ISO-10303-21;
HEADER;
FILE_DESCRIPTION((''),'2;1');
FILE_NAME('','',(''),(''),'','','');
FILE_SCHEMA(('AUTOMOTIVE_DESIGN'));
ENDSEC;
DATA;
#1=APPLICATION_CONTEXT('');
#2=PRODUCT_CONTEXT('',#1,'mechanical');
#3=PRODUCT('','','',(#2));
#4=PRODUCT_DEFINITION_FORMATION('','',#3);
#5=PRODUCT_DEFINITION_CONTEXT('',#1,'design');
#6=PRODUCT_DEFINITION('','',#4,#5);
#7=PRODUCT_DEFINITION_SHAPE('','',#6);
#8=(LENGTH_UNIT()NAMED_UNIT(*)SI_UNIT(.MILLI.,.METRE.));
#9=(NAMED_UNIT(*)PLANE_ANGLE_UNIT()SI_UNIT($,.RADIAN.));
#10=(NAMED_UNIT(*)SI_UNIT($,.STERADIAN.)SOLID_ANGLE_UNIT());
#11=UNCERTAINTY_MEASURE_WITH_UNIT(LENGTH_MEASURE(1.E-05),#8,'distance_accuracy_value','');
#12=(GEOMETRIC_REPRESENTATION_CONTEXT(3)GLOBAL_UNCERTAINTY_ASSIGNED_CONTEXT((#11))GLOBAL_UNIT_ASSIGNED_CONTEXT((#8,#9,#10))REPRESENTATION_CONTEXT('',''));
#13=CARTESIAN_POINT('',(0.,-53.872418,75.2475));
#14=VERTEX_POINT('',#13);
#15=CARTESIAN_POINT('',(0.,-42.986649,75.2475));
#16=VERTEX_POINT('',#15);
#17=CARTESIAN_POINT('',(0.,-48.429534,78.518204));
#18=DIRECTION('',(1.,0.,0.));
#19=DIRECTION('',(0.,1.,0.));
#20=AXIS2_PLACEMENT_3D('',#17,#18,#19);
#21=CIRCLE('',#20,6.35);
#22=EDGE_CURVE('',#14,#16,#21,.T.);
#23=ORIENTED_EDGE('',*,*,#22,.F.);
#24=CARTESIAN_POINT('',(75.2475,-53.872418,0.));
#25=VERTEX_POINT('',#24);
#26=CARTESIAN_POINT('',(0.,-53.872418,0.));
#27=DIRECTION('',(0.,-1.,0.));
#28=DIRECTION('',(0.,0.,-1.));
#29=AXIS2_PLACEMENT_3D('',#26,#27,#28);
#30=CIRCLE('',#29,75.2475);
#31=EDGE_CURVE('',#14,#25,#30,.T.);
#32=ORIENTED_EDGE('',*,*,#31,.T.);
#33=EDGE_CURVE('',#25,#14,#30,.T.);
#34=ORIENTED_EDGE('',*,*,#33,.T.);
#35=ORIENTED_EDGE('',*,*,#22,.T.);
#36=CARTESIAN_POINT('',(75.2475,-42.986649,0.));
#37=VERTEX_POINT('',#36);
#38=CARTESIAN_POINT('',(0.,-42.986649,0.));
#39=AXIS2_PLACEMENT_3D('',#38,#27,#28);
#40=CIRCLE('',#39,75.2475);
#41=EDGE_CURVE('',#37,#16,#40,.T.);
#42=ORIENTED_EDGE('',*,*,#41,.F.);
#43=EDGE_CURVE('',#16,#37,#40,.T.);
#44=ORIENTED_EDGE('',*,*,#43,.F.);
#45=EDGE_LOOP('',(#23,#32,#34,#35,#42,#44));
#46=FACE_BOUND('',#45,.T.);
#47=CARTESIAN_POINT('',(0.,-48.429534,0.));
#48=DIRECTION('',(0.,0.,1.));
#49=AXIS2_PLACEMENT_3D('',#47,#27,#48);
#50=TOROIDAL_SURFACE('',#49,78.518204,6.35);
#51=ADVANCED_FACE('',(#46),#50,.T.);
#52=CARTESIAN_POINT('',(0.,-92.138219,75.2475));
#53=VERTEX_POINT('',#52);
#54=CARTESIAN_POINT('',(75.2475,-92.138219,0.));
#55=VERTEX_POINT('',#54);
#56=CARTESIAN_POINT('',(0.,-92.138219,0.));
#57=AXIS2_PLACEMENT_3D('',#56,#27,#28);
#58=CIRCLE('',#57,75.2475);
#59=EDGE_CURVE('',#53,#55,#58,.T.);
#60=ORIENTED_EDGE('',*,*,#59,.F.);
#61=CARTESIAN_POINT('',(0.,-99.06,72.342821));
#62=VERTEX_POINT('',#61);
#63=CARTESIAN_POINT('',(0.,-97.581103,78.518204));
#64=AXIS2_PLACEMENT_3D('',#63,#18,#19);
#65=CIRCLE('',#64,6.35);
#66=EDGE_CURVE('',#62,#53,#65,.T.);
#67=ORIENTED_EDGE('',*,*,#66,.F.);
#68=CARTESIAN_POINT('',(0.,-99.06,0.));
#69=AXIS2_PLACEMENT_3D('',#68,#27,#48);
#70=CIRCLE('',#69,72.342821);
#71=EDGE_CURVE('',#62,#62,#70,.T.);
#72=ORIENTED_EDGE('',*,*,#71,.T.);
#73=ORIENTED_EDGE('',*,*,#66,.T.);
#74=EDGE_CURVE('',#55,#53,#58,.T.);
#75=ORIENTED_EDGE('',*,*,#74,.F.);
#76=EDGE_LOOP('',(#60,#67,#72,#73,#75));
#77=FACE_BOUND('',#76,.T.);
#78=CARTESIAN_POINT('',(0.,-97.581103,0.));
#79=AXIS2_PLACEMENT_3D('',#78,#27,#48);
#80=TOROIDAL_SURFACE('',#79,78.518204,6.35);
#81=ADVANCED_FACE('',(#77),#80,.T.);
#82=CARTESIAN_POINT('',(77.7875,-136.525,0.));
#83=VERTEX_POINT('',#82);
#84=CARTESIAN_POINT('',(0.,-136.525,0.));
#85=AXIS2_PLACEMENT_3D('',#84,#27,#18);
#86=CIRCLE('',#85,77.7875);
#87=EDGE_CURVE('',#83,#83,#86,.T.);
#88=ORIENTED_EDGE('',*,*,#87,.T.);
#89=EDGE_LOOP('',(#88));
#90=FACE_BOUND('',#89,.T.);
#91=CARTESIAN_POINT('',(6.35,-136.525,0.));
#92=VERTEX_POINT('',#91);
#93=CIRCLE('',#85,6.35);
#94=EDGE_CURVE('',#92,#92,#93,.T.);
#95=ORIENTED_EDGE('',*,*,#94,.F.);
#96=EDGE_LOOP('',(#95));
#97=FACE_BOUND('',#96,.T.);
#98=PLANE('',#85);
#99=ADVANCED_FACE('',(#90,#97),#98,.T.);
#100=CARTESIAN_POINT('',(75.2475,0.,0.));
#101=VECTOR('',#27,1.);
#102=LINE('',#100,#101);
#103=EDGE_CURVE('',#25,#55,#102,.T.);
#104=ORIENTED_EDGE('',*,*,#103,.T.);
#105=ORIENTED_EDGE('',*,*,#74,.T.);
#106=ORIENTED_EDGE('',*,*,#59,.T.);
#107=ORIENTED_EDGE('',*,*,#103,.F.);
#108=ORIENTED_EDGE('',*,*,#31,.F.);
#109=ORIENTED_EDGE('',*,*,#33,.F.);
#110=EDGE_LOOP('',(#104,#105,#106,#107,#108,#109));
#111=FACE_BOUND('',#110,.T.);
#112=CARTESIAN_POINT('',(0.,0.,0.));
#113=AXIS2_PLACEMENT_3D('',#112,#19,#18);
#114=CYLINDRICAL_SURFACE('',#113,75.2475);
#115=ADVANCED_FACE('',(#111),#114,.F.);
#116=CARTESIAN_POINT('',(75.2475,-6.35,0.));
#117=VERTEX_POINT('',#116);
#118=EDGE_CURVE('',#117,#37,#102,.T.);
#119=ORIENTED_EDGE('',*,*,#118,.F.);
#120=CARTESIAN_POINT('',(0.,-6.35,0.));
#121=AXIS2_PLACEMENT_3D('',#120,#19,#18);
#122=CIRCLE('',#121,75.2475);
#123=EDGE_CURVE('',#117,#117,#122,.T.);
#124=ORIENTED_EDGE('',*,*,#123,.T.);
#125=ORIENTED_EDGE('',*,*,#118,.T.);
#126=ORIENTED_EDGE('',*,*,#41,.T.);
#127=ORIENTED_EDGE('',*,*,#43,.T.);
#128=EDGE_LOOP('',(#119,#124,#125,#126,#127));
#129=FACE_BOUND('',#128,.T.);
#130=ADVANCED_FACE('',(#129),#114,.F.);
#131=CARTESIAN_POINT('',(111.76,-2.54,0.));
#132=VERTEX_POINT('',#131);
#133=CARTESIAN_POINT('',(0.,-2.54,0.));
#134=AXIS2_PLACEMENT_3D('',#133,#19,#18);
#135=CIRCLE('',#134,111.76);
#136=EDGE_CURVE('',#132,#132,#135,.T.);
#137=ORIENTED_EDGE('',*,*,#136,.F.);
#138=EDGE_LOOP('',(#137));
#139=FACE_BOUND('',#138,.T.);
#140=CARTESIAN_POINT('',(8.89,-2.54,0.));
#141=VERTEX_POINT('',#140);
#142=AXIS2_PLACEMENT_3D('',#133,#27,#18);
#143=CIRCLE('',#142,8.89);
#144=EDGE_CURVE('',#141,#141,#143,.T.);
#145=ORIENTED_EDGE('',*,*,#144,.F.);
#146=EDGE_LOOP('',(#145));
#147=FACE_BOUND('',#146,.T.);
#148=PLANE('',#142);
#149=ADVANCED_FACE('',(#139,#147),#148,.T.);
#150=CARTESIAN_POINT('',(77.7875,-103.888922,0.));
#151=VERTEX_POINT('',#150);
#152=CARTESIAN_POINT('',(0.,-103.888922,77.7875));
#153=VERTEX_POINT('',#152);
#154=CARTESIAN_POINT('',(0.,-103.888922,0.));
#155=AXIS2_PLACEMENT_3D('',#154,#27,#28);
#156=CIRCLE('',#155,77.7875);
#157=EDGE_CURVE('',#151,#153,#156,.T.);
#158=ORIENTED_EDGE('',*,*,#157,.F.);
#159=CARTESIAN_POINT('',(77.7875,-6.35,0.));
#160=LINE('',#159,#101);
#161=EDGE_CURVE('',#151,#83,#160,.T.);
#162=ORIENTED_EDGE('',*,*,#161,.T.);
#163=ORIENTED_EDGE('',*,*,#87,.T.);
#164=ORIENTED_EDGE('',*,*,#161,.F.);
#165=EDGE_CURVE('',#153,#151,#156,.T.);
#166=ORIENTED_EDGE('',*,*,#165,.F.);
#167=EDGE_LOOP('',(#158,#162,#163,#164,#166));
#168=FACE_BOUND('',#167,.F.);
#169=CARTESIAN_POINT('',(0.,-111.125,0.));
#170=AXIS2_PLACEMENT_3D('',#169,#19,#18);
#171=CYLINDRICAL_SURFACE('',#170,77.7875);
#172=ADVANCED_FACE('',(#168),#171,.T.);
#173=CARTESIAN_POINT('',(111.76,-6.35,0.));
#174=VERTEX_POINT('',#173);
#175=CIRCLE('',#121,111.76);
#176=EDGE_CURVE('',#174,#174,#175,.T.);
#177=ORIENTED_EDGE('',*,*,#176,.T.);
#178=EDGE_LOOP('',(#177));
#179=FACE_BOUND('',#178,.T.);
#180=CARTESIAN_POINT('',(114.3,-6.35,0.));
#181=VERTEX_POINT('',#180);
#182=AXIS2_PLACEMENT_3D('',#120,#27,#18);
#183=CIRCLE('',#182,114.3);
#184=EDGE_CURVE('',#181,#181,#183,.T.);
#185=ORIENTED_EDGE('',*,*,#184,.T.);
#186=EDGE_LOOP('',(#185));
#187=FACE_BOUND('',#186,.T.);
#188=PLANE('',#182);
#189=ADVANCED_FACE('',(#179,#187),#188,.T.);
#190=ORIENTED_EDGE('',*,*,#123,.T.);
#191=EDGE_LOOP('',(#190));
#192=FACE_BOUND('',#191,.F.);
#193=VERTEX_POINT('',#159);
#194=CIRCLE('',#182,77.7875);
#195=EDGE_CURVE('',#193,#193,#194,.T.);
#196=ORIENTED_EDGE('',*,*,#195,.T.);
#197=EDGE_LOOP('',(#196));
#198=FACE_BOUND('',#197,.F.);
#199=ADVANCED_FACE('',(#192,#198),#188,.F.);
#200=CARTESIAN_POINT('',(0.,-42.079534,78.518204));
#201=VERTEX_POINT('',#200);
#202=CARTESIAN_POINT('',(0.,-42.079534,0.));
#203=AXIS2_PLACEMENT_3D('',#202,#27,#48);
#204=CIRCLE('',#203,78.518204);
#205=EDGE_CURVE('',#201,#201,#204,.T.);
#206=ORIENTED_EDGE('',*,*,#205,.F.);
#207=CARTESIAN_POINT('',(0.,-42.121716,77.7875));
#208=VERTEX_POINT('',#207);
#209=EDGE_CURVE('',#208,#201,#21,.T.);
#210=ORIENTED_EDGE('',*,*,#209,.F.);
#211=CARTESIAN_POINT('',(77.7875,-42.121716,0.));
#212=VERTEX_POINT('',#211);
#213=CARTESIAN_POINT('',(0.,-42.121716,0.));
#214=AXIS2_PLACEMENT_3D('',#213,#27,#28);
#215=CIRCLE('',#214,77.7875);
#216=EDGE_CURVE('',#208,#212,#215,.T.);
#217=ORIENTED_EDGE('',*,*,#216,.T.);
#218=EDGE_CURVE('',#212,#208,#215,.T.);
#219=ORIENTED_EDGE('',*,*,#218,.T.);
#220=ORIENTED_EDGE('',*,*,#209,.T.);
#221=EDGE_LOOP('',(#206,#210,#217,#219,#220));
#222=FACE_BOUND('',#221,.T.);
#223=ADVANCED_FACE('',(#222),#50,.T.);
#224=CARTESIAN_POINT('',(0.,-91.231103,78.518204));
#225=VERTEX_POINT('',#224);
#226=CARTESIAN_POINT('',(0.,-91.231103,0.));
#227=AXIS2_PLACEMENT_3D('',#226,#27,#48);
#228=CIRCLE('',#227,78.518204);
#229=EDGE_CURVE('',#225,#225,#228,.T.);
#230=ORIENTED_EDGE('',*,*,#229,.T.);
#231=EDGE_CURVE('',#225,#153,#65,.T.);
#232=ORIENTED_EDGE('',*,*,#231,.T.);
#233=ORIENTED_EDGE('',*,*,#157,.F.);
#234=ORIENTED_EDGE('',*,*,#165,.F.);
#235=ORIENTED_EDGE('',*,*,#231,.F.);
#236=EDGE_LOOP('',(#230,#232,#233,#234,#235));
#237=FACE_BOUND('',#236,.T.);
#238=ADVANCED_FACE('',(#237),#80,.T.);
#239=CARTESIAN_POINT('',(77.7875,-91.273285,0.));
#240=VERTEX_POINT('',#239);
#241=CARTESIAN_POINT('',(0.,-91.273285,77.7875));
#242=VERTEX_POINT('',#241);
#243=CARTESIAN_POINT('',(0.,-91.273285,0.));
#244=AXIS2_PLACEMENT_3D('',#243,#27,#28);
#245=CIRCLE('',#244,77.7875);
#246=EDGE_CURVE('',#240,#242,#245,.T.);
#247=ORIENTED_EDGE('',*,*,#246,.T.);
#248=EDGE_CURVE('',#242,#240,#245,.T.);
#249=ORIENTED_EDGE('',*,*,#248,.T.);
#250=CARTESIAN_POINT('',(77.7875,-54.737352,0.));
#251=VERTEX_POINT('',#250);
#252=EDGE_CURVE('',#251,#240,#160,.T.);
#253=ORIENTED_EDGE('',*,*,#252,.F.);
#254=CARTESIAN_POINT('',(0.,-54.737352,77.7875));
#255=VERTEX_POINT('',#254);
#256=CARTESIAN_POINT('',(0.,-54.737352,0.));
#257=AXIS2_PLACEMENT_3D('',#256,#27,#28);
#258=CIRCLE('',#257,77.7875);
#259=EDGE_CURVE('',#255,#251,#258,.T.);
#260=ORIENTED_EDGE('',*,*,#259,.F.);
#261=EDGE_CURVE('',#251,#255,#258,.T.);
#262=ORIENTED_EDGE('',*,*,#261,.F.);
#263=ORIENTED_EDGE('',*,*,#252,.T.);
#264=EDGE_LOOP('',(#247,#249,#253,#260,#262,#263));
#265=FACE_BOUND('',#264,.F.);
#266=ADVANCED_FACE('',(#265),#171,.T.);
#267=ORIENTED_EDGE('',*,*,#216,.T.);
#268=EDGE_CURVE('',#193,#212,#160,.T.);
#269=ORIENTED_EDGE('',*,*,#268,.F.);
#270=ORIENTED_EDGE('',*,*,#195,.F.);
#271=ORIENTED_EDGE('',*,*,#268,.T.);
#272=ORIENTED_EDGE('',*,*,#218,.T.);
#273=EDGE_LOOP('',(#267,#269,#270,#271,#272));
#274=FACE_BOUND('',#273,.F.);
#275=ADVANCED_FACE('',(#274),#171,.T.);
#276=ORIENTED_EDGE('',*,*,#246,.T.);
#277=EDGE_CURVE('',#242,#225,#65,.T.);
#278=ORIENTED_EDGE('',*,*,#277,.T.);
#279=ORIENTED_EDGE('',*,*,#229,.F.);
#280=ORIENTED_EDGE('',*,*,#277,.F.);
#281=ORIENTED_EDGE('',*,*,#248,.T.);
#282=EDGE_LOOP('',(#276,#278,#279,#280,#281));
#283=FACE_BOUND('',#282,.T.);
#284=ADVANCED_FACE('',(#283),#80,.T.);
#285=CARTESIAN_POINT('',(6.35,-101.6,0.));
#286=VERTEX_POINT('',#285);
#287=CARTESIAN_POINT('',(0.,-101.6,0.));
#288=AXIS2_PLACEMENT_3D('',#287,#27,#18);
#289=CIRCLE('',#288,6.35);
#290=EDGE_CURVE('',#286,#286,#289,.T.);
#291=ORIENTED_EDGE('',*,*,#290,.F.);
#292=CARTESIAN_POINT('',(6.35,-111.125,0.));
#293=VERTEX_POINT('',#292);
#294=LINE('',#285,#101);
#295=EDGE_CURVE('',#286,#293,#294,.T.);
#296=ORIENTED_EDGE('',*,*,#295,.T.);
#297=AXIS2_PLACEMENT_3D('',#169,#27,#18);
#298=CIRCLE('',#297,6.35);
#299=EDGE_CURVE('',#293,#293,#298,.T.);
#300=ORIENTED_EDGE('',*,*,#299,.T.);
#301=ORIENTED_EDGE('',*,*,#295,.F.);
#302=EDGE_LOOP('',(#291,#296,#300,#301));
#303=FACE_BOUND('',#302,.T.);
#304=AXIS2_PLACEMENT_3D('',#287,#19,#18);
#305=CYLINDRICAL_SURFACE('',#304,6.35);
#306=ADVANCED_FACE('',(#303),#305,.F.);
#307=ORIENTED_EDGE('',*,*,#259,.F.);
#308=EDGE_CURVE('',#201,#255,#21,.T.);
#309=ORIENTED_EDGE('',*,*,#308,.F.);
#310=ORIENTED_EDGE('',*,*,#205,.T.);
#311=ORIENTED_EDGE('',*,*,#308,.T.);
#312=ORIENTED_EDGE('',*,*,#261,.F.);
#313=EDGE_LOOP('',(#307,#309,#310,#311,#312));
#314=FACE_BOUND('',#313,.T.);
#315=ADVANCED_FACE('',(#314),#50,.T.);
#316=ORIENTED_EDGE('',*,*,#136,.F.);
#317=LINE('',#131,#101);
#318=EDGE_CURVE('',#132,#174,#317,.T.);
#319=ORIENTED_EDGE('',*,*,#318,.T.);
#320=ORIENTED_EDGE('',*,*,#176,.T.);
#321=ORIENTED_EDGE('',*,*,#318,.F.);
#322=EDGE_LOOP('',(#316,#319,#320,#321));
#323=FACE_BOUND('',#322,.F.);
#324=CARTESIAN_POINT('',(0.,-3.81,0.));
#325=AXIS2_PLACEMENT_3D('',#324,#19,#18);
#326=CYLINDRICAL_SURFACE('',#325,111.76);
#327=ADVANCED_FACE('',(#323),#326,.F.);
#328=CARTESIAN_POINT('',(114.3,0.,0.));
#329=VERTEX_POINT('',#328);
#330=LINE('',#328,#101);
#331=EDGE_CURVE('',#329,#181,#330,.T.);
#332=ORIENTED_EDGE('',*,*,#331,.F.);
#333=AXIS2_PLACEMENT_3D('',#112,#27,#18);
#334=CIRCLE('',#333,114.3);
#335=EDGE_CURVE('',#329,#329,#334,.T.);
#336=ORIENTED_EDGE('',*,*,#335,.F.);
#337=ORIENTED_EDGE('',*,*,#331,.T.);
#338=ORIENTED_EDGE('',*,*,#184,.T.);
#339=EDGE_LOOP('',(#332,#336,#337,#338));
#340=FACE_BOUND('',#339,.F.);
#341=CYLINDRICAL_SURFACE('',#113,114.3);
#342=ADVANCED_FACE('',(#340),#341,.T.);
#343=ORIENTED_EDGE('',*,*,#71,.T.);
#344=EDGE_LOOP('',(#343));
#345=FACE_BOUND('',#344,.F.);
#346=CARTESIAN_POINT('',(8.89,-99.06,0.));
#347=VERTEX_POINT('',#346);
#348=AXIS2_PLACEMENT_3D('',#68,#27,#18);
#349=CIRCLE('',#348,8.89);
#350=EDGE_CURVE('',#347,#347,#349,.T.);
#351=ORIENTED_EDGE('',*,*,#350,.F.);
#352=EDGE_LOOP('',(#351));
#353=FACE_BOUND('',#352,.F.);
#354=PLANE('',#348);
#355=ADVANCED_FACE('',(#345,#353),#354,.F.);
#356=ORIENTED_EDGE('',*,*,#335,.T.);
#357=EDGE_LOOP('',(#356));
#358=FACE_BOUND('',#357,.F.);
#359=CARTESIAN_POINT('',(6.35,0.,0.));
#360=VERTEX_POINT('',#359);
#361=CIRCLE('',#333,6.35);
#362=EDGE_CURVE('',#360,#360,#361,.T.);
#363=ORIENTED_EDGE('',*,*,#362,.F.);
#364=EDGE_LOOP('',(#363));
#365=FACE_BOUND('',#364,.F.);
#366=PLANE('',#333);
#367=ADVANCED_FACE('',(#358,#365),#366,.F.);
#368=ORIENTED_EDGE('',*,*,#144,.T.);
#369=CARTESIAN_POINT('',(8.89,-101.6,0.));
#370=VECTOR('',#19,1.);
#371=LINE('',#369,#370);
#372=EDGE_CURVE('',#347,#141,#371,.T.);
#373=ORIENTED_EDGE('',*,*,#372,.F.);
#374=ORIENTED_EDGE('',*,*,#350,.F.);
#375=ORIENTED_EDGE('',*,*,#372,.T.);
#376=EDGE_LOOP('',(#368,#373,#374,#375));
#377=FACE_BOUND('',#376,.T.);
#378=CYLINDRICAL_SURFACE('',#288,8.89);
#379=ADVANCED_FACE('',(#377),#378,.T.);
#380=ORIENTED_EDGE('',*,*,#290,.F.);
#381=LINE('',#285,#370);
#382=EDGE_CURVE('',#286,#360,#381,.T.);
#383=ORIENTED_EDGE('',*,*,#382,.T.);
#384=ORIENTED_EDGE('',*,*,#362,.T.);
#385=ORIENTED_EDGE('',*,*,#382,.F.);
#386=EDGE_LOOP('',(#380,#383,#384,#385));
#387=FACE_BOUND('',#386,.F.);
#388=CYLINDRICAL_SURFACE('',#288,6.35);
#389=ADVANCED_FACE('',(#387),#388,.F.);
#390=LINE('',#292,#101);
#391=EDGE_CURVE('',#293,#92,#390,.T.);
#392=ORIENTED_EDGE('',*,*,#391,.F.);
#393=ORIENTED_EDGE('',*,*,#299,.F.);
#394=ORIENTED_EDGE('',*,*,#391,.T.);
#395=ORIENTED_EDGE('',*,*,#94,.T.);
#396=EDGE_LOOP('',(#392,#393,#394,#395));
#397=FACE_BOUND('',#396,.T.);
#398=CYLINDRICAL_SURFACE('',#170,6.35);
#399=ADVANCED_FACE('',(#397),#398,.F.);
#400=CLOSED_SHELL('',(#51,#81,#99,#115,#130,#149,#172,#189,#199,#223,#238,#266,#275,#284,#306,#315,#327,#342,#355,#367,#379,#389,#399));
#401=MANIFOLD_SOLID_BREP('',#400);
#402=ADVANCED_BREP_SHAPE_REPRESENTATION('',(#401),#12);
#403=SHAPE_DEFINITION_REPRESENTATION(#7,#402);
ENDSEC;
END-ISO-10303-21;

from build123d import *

# Parameters (mm, degrees)
F0_R     = 114.3
F0_R_2   = 77.7875
F1_DEPTH = 6.35
F2_DEPTH = 203.2
F3_DEPTH = 101.6
F4_R     = 6.35
F5_DEPTH = 101.601
F6_T     = -2.54
F7_DEPTH = 9.525
F8_DEPTH = 25.4
F9_R     = 6.35


# Not quite as in the source:
# - a shell that OpenCascade refuses in one call is made with other operations: the cavity is built on its own and cut out


with BuildPart() as f1:
    # F0 (on Front) → F1 (new body)
    with BuildSketch(Plane.XZ):
        Circle(F0_R)
        Circle(F0_R_2, mode=Mode.SUBTRACT)
    extrude(amount=F1_DEPTH)

    # F0 (on Front) → F2 (join)
    with BuildSketch(Plane.XZ):
        Circle(F0_R_2)
    extrude(amount=F2_DEPTH)

    # F3 (cut): a face of the model
    f3_faces = [f1.faces().sort_by_distance(p)[0] for p in [
        (0, -203.2, 0),
    ]]
    extrude(f3_faces, amount=-F3_DEPTH, mode=Mode.SUBTRACT)

    # F4 (on face) → F5 (cut, through all)
    with BuildSketch(Plane.XZ.offset(101.6)):
        Circle(F4_R)
    extrude(amount=-F5_DEPTH, mode=Mode.SUBTRACT)

    # F6: a shell. OpenCascade refuses it in one call, so the cavity is built on its own and cut out:
    # the body offset inwards by the wall thickness, plus a prism from it out through each open face.
    f6_core = offset(f1.part, amount=F6_T, kind=Kind.INTERSECTION, mode=Mode.PRIVATE)
    f6_exits = [f6_core.faces().sort_by_distance(p)[0] for p in [
        (-78.40855, -3.81, 0),
    ]]
    add(f6_core, mode=Mode.SUBTRACT)
    extrude(f6_exits, amount=-F6_T, mode=Mode.SUBTRACT)

    # F7 (add): a face of the model
    f7_faces = [f1.faces().sort_by_distance(p)[0] for p in [
        (-75.5873372503, -101.6, 0),
    ]]
    extrude(f7_faces, amount=F7_DEPTH)

    # F8 (add): a face of the model
    f8_faces = [f1.faces().sort_by_distance(p)[0] for p in [
        (-75.5873372503, -111.125, 0),
    ]]
    extrude(f8_faces, amount=F8_DEPTH)

    # F9 (on Right) → F10 (revolve)
    with BuildSketch(Plane.YZ):
        with Locations((-48.4295338392, 78.518204391)):
            Circle(F9_R)
        with Locations((-97.5811034441, 78.518204391)):
            Circle(F9_R)
    revolve(axis=Axis((0, -136.525, 0), (0, -1, 0)))


solid = f1.part
